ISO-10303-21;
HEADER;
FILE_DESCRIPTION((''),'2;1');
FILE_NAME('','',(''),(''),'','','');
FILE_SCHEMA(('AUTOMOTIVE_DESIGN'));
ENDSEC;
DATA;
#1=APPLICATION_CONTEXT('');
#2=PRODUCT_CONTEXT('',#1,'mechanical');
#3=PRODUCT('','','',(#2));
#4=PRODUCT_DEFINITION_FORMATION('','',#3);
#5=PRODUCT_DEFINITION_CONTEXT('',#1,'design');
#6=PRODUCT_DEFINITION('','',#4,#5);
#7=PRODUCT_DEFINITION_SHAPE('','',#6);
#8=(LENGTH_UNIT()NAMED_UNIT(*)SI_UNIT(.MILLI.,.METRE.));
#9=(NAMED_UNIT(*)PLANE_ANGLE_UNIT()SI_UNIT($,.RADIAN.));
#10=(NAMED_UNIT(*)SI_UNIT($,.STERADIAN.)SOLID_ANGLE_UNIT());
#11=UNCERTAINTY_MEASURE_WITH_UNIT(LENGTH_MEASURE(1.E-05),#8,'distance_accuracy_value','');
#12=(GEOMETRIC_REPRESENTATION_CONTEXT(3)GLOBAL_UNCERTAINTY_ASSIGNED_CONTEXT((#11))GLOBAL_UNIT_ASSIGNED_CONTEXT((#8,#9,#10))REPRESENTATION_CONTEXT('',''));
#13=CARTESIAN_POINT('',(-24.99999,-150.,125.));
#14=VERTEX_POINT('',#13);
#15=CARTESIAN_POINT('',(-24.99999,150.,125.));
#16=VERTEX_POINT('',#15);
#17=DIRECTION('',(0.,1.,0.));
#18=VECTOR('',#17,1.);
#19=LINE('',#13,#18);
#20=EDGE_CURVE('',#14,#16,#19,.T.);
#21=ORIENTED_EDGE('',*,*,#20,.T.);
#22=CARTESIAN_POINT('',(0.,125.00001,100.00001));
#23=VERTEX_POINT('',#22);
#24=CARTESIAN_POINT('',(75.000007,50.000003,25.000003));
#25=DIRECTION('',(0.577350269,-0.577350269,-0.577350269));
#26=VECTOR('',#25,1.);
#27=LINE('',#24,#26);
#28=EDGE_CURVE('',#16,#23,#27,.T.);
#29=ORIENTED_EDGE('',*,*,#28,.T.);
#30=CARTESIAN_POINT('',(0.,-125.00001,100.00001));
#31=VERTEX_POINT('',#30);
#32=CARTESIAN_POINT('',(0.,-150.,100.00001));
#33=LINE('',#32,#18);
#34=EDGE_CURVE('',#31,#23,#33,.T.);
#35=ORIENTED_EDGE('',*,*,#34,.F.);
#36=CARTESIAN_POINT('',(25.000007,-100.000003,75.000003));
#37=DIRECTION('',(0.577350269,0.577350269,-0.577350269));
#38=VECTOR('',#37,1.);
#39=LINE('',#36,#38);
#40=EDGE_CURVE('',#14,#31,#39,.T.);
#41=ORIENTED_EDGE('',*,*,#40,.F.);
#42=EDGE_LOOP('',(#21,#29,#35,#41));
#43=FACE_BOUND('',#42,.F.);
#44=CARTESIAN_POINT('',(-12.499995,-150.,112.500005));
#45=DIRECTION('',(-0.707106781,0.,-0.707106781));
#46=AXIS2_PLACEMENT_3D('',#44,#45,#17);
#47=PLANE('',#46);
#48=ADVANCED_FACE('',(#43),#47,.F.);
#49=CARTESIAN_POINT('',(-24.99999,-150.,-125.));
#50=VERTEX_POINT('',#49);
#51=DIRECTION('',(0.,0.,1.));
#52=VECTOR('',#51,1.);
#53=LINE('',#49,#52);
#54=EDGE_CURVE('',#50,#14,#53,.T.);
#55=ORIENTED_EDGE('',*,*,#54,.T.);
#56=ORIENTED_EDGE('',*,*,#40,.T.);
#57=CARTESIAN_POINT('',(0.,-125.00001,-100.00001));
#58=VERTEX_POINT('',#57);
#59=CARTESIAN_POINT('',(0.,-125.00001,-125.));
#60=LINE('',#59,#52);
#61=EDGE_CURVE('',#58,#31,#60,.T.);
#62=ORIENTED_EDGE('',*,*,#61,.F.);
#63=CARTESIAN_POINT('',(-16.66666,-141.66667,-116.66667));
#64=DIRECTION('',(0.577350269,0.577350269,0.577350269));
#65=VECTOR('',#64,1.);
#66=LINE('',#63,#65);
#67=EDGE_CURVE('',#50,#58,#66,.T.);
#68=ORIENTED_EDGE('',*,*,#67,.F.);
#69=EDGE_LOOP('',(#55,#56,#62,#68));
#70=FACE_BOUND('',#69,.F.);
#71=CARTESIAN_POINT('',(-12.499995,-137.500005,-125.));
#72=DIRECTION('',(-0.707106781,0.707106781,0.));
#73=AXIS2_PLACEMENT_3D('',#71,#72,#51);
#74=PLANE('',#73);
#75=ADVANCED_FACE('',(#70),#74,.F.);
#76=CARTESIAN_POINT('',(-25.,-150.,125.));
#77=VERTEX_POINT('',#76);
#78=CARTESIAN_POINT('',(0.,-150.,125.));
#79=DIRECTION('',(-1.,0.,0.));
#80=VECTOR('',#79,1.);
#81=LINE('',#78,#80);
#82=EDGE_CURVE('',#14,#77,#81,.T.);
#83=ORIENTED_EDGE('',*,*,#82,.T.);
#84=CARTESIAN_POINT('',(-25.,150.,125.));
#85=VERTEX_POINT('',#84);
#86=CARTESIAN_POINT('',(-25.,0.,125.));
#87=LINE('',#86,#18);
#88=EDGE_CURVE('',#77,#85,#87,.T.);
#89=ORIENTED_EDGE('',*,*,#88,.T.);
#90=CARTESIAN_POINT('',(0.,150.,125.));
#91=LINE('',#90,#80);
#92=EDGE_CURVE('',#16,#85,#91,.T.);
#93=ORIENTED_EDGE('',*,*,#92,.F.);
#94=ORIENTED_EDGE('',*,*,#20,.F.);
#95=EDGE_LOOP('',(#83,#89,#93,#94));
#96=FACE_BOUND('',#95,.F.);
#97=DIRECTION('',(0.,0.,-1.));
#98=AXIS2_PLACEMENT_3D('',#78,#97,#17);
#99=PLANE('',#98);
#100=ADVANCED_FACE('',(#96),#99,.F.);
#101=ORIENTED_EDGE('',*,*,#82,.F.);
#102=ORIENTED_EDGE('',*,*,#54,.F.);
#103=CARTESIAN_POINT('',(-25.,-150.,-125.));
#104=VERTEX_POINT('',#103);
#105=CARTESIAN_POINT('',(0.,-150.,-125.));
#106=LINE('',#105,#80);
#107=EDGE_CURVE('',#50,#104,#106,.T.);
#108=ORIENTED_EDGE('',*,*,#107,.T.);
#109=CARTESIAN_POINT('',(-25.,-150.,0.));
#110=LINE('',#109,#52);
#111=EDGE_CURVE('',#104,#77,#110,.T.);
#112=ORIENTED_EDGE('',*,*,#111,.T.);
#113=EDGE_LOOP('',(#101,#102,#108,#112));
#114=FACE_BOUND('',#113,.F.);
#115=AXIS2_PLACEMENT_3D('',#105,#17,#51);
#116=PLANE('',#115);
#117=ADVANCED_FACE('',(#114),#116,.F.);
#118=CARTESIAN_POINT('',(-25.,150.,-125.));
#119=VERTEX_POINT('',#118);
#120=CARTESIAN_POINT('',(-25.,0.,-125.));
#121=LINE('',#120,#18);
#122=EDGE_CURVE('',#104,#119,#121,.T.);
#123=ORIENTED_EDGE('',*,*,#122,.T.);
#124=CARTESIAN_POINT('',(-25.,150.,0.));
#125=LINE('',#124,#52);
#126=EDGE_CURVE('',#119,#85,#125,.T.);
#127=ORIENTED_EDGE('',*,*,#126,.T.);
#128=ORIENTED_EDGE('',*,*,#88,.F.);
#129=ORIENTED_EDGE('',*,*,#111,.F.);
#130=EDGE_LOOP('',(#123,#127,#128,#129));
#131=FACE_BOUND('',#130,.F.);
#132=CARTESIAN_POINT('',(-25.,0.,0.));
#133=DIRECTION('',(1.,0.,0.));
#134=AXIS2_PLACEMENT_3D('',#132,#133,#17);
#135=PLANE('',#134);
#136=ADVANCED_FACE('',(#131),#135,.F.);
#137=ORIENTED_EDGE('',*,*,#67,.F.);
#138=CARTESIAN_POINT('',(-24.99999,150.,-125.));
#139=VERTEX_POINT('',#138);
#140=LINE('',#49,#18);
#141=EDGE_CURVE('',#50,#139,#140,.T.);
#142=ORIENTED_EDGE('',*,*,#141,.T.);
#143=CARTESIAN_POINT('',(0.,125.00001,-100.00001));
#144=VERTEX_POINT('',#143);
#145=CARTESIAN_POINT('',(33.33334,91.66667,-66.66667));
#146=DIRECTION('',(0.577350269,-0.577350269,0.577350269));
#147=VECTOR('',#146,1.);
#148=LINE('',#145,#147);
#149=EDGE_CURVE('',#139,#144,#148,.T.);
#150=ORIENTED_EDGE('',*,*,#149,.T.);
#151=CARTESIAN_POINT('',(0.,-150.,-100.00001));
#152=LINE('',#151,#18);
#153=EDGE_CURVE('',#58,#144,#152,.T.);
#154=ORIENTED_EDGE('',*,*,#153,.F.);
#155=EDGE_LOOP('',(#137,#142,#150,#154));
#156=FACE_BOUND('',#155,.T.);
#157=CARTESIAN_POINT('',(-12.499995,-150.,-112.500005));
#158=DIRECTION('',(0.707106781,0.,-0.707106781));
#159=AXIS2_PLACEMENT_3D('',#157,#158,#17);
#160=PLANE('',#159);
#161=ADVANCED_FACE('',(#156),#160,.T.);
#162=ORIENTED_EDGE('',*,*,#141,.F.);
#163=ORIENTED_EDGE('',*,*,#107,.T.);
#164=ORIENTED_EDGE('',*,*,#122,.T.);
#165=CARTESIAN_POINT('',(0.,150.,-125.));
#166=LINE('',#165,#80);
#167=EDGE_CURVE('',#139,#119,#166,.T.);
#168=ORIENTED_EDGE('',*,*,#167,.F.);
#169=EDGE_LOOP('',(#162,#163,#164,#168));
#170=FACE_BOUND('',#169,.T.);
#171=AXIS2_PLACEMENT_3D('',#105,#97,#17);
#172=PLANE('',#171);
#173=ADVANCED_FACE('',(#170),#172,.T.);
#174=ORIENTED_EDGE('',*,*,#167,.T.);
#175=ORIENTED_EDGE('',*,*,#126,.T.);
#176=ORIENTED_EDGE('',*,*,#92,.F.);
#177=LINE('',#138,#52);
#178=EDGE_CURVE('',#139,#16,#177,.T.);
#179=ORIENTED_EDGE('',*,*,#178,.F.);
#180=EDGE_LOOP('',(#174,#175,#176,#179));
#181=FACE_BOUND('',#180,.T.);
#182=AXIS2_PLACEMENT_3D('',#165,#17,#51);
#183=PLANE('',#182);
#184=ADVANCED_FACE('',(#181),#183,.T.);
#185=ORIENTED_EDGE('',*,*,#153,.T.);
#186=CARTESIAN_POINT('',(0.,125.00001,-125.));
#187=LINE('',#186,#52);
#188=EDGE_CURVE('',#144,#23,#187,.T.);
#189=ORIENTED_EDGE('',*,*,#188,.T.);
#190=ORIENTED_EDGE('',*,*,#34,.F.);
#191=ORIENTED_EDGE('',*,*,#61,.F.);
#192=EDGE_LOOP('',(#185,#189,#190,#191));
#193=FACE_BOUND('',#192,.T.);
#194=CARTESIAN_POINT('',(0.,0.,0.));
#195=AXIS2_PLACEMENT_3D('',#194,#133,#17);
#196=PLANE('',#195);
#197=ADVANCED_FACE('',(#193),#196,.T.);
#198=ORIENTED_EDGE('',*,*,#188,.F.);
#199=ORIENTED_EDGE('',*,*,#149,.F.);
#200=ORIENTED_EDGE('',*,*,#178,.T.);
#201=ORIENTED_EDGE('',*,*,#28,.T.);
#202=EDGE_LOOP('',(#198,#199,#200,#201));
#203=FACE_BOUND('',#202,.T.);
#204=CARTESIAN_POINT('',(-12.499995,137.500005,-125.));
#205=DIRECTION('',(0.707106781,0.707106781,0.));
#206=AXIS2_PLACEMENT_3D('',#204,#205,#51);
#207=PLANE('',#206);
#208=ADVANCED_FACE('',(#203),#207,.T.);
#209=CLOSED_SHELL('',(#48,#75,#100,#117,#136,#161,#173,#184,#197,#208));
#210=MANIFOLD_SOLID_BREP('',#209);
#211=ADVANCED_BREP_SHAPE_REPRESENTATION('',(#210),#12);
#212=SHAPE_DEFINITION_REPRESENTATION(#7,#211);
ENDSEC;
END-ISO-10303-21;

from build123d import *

# Parameters (mm, degrees)
F0_W     = 300
F0_H     = 250
F1_DEPTH = 25
F2_SIZE  = 24.99999


# Not quite as in the source:
# - a fillet or chamfer is up to 0.001 mm smaller than in the source, because OpenCascade refuses the exact size


with BuildPart() as f1:
    # F0 (on Right) → F1 (new body)
    with BuildSketch(Plane.YZ):
        Rectangle(F0_W, F0_H)
    extrude(amount=-F1_DEPTH)

    # F2 (size 25 in the source; OpenCascade refuses exactly that, so slightly less here)
    f2_edges = [f1.edges().sort_by_distance(p)[0] for p in [
        (0, 0, 125),
        (0, -150, 0),
        (0, 0, -125),
        (0, 150, 0),
    ]]
    chamfer(f2_edges, length=F2_SIZE)


solid = f1.part
